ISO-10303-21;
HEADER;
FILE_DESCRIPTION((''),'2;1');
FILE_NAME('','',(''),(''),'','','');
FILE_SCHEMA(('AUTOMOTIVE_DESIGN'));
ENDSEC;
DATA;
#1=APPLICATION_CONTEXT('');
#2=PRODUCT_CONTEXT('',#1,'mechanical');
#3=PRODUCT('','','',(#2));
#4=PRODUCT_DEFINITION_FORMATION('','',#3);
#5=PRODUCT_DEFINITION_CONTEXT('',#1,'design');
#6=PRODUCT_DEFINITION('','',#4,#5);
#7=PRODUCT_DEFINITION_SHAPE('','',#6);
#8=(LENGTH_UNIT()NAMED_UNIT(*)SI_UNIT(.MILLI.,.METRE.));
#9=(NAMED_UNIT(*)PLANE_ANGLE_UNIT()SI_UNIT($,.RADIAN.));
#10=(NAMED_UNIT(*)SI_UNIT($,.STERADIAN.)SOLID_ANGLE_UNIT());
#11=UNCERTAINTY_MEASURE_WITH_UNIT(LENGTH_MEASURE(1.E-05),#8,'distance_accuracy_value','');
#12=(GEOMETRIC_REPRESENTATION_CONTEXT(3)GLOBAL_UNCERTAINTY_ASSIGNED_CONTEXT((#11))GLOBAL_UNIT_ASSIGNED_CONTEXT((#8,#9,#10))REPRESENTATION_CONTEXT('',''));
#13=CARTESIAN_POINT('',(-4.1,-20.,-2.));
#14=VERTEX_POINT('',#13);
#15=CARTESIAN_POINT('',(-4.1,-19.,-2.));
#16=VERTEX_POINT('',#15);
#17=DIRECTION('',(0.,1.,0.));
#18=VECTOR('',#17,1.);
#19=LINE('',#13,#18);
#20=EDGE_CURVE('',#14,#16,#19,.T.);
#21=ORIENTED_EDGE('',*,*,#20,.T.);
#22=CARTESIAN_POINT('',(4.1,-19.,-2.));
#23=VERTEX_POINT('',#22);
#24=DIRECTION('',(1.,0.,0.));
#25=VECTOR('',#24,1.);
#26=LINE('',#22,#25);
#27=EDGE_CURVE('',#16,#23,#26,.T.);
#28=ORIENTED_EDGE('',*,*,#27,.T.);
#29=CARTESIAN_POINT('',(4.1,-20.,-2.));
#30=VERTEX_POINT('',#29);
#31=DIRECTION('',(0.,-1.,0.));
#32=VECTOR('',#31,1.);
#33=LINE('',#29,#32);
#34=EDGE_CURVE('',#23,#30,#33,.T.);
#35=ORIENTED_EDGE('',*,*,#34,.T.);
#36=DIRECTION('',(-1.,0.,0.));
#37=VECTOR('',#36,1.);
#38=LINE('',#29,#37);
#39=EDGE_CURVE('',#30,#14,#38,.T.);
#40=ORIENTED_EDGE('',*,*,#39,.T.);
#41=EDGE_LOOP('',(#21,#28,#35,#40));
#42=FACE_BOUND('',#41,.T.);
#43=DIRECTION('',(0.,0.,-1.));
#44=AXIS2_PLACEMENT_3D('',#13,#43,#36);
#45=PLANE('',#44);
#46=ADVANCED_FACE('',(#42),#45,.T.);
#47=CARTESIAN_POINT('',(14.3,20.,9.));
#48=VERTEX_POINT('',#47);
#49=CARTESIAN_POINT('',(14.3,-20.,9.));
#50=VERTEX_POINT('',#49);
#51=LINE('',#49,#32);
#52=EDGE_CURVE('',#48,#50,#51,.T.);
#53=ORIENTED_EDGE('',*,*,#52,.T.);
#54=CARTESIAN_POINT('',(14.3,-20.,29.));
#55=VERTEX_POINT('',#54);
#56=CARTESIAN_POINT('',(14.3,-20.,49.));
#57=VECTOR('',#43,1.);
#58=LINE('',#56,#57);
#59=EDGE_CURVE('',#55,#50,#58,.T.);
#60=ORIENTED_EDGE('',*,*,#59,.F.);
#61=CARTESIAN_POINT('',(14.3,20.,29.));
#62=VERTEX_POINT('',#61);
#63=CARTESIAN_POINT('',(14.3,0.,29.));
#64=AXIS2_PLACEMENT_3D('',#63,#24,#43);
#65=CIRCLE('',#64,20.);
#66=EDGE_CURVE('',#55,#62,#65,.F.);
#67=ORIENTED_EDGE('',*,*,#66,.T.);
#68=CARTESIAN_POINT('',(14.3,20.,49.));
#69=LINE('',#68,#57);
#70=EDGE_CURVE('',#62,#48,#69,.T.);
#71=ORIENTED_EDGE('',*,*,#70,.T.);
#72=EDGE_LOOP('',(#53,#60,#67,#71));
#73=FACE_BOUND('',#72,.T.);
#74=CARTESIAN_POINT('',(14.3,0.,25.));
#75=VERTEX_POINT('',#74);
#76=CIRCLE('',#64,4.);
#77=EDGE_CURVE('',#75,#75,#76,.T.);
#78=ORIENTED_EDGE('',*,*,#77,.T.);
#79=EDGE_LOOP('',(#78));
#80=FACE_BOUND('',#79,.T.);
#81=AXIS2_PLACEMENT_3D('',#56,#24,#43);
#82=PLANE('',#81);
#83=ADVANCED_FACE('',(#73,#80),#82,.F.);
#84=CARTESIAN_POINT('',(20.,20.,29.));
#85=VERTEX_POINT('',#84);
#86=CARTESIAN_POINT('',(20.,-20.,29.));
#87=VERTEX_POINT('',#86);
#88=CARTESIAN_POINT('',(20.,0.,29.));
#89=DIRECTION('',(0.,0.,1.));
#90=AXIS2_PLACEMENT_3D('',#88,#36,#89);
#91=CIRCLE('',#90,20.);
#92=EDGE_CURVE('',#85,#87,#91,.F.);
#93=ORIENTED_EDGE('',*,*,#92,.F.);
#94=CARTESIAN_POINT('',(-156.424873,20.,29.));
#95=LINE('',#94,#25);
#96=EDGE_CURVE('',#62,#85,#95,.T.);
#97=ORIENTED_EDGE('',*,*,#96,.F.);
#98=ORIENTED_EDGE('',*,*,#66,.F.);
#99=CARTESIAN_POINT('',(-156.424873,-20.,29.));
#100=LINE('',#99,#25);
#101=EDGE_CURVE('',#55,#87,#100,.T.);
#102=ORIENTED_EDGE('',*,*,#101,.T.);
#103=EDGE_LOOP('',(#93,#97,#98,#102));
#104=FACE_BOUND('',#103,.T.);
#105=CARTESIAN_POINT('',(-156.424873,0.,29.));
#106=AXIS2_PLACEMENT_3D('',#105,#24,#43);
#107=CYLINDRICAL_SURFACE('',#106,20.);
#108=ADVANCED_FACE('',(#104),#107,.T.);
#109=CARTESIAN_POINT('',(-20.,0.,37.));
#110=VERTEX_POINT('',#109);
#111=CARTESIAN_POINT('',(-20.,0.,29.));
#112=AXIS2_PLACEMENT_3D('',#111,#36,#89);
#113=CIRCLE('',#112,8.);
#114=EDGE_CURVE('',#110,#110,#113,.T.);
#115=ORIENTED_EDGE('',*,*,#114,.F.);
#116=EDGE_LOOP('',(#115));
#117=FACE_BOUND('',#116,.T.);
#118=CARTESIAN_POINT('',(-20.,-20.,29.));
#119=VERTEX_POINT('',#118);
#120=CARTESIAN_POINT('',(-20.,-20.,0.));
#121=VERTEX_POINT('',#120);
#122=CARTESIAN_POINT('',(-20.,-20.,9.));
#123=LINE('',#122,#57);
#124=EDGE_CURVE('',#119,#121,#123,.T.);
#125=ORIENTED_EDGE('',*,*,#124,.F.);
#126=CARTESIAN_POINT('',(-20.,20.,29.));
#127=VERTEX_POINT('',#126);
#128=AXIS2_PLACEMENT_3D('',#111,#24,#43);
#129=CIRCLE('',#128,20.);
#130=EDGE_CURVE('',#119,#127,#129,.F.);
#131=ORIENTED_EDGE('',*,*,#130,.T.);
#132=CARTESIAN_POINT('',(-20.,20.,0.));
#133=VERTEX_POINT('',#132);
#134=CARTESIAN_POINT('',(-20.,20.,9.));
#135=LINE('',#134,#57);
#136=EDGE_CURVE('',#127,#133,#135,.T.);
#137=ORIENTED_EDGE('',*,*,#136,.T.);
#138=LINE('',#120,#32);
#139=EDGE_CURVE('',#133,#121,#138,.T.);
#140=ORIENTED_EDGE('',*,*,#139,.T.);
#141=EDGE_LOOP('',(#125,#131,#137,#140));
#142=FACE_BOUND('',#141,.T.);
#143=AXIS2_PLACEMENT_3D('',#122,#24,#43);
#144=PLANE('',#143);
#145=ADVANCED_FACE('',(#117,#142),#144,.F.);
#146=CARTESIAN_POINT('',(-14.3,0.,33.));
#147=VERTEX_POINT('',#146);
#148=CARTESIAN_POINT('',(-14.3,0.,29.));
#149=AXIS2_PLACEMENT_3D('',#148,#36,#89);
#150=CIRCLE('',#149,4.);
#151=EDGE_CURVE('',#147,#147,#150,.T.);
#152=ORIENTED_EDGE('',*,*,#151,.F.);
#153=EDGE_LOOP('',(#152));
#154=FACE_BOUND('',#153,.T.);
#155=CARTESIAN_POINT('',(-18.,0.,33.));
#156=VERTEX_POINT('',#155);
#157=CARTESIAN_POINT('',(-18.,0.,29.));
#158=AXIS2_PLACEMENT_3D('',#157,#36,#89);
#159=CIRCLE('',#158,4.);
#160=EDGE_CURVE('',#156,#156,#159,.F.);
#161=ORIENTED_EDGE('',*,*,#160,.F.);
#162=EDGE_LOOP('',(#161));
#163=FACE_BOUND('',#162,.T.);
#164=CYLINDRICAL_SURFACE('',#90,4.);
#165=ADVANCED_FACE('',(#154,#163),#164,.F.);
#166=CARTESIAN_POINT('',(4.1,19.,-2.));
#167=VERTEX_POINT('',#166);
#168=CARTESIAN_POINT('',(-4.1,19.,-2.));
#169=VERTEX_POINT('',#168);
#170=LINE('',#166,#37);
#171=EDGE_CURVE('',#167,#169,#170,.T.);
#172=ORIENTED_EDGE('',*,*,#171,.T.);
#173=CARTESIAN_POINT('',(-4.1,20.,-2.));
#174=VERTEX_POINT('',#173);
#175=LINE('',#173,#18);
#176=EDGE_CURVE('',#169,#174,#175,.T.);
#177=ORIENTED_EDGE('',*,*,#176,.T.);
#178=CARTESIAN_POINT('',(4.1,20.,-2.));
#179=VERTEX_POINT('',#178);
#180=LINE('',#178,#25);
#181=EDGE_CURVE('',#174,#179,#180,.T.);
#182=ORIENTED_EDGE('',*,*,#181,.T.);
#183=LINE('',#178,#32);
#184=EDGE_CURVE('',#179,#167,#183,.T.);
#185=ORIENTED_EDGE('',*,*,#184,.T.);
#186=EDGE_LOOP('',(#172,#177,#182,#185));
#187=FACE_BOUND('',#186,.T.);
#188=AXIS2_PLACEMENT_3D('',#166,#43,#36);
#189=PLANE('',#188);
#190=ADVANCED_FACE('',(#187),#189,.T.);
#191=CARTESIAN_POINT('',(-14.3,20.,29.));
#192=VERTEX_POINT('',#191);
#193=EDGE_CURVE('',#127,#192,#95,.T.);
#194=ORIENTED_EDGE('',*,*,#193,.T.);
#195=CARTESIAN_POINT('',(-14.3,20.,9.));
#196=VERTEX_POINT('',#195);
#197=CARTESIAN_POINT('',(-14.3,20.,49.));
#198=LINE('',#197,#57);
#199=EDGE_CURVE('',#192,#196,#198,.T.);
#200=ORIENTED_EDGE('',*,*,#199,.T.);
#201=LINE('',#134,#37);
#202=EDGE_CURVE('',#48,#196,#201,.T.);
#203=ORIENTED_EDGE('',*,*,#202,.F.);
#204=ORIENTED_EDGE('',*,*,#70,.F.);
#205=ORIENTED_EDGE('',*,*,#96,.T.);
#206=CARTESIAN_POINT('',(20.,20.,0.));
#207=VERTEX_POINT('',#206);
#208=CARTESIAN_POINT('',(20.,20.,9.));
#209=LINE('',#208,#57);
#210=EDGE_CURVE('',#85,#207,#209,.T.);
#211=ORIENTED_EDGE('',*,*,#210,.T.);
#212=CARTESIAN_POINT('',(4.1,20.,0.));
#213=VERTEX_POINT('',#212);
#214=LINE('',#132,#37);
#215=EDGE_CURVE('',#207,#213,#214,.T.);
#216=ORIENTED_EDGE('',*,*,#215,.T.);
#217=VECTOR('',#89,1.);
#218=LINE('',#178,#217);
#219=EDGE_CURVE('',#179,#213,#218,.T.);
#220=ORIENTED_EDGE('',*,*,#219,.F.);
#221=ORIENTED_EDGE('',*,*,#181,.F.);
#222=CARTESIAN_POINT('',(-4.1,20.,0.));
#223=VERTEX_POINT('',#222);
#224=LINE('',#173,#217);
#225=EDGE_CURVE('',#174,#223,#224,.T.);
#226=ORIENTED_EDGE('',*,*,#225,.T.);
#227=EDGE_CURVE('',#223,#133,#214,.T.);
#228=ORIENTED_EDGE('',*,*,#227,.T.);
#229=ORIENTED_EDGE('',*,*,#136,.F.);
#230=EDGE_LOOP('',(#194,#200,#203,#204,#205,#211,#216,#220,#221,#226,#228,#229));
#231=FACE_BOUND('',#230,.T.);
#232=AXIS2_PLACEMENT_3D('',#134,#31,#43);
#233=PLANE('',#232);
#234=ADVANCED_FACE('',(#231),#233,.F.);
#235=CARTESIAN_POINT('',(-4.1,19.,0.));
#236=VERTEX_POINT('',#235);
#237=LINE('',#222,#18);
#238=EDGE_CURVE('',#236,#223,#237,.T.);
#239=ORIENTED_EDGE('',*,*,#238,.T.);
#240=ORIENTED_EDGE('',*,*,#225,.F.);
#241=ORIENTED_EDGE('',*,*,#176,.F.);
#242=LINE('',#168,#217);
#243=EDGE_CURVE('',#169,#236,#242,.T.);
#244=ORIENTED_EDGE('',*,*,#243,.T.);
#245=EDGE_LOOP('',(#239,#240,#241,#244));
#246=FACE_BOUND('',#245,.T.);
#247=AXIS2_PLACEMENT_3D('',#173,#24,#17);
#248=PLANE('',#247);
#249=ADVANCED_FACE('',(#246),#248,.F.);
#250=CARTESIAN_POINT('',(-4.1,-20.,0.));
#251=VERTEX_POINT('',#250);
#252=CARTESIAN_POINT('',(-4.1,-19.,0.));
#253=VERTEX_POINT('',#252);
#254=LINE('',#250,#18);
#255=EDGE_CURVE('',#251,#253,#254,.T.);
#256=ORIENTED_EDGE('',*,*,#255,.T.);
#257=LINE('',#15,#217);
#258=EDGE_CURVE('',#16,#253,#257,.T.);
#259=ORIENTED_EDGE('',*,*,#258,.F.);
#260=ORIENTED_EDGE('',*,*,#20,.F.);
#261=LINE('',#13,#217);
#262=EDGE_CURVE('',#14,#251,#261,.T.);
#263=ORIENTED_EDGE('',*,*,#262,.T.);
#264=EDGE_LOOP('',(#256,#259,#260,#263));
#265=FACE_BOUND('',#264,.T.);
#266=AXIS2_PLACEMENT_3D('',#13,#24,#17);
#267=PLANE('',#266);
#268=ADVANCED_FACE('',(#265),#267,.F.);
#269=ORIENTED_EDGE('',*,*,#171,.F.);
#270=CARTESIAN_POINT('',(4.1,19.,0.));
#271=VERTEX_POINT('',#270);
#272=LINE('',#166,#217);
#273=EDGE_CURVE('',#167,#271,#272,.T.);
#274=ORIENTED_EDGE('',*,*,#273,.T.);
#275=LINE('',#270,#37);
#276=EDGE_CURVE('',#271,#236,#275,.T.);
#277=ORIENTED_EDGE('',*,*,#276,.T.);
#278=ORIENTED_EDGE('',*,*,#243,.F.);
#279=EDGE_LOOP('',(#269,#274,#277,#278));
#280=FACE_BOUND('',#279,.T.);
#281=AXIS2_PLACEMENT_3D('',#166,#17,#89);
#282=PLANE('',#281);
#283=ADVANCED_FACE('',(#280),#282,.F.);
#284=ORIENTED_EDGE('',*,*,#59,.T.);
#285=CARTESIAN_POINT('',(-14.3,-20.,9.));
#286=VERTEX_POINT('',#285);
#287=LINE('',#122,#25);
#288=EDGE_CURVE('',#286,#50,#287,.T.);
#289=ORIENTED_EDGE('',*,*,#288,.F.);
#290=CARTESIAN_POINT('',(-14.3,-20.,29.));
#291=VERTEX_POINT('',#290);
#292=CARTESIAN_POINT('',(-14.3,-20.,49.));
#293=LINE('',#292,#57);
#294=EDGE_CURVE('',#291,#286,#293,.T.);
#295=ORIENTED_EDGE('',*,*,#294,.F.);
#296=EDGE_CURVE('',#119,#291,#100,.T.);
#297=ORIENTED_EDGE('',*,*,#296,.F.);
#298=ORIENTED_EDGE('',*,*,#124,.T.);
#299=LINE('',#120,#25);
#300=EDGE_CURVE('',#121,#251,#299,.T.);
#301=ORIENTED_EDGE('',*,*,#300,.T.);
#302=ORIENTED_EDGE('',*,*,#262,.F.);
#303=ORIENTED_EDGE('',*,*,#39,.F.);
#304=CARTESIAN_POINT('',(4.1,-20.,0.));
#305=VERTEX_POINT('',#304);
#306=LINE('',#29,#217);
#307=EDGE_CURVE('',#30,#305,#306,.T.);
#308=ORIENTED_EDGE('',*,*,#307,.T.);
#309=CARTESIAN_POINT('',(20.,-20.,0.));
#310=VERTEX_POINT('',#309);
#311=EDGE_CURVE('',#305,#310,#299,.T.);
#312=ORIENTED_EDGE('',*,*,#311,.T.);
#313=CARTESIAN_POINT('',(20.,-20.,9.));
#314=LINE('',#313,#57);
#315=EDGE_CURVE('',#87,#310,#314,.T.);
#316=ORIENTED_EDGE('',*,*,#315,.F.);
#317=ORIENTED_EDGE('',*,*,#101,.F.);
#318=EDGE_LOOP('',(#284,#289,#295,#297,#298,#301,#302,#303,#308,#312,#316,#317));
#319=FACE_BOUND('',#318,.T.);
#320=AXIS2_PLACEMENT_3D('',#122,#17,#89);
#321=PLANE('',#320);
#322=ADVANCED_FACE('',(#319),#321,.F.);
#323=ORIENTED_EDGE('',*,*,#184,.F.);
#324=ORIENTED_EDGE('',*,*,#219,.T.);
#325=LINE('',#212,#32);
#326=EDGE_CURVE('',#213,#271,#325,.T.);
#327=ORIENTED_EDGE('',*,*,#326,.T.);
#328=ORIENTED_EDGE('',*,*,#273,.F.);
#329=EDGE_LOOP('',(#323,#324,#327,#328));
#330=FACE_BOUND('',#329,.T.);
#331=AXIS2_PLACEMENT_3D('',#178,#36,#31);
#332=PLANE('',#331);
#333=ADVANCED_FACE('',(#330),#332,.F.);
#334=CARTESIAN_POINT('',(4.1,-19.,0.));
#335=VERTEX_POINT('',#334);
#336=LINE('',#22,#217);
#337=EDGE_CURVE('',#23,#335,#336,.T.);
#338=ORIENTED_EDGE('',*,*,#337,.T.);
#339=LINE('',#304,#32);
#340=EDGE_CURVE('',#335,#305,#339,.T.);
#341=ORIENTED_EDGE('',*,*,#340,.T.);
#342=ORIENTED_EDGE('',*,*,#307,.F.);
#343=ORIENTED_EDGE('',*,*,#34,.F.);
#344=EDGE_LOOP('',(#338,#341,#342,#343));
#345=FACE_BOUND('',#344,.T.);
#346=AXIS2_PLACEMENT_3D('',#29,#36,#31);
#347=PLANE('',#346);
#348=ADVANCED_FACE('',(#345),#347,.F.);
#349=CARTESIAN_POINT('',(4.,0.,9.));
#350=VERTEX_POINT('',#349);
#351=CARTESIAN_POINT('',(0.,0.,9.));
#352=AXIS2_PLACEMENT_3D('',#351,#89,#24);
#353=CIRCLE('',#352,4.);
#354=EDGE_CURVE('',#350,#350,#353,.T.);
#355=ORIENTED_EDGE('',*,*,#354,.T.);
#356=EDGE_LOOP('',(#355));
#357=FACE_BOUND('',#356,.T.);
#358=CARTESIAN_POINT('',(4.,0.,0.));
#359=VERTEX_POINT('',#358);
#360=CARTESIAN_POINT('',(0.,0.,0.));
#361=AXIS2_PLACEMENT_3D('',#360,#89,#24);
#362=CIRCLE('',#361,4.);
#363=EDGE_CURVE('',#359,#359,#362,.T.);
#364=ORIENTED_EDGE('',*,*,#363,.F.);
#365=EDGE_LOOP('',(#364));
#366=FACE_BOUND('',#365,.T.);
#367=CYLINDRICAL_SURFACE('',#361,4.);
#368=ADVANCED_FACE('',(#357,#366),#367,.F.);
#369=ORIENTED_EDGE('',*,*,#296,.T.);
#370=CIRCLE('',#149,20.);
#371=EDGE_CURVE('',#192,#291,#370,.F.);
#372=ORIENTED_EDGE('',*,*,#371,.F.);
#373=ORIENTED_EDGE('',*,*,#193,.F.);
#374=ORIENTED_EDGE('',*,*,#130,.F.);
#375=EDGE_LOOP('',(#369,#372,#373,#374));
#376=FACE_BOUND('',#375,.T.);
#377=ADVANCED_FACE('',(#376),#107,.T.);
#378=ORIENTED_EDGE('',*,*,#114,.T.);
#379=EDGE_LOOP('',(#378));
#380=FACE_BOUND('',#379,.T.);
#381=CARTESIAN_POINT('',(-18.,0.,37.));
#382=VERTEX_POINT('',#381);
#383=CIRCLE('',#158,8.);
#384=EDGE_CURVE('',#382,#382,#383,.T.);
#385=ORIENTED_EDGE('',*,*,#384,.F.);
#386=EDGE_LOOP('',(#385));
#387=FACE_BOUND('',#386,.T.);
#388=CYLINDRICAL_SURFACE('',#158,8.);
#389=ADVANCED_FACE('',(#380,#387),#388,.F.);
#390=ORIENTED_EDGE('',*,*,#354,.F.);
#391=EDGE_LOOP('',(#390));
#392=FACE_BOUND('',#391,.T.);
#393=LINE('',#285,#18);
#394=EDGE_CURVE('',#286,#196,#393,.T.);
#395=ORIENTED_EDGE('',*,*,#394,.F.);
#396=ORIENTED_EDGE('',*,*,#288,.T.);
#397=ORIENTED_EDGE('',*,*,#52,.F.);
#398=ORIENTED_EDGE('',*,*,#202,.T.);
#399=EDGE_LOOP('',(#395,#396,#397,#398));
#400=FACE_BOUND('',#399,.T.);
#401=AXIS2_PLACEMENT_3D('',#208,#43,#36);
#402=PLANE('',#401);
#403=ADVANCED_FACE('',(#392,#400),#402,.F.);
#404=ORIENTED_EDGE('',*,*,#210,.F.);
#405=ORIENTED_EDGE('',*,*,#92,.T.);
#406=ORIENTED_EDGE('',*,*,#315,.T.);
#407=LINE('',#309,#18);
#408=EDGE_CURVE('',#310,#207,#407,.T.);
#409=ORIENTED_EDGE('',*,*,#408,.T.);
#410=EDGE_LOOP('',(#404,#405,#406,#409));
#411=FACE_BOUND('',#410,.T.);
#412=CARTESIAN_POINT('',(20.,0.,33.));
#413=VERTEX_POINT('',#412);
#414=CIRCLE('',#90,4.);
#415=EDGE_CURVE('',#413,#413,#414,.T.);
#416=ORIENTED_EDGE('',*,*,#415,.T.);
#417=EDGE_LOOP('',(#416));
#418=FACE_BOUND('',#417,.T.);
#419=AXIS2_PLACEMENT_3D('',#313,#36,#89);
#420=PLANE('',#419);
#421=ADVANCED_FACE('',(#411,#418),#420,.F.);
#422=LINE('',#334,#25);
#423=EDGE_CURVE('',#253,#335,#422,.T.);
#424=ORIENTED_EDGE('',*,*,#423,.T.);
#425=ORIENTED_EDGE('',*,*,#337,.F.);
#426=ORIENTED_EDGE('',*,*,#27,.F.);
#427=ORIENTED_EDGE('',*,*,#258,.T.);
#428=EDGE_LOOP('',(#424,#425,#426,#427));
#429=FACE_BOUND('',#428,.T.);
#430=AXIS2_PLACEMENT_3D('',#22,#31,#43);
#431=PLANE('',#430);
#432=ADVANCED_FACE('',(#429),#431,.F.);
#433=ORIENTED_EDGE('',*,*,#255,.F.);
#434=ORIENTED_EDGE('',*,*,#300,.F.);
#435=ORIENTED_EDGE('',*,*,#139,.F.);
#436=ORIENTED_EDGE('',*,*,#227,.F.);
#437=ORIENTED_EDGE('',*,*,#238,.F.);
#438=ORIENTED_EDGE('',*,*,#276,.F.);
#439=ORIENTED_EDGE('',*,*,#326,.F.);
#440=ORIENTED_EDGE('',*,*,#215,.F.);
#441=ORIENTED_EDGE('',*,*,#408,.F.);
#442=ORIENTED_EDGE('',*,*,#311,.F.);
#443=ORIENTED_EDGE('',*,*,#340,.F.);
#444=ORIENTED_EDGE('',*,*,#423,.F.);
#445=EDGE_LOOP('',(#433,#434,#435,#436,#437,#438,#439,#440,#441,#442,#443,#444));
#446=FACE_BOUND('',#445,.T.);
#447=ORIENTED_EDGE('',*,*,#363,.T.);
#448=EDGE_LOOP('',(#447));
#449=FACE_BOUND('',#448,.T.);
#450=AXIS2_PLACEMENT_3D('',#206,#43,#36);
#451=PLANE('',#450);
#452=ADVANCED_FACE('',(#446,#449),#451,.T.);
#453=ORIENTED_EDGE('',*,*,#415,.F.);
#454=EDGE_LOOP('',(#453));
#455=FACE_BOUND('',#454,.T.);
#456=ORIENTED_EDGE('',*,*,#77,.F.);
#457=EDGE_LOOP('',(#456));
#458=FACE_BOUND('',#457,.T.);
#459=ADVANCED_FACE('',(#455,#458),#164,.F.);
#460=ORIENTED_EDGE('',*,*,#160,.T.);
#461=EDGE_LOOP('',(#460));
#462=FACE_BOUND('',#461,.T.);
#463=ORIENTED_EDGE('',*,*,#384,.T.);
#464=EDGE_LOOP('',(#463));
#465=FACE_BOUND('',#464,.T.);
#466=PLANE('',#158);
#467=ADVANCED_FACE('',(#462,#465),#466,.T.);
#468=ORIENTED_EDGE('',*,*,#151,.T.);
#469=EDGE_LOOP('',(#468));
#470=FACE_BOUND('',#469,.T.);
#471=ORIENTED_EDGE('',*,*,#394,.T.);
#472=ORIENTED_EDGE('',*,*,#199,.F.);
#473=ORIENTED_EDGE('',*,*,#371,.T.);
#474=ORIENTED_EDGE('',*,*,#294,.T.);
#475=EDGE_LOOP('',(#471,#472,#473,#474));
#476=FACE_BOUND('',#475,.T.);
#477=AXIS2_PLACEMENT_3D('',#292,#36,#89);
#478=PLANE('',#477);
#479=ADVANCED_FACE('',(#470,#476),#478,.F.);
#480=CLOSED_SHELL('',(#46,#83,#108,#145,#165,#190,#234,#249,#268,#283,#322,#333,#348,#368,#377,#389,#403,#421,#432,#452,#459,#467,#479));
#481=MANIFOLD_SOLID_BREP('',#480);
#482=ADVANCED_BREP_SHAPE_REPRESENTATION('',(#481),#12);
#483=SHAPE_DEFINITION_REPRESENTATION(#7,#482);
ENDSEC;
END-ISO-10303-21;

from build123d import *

# Parameters (mm, degrees)
SKETCH_1_W          = 40
SKETCH_1_H          = 40
EXTRUDE_1_DEPTH     = 9
SKETCH_2_W          = 5.7
SKETCH_2_H          = 40
EXTRUDE_2_DEPTH     = 40
CUT_EXTRUDE_START   = -40
CUT_EXTRUDE_2_DEPTH = 40
SKETCH_4_R          = 4
CUT_EXTRUDE_3_DEPTH = 67.340033162
SKETCH_5_R          = 8
CUT_EXTRUDE_4_DEPTH = 2
SKETCH_6_R          = 4
CUT_EXTRUDE_5_DEPTH = 49.989794856
SKETCH_7_W          = 8.2
SKETCH_7_H          = 1
EXTRUDE_3_DEPTH     = 2


# Read off the part's stored shape, not the designer's step: 切除-拉伸2
with BuildPart() as part:
    # 草图1 → 凸台-拉伸1 (new body)
    with BuildSketch(Plane.XY):
        Rectangle(SKETCH_1_W, SKETCH_1_H)
    extrude(amount=EXTRUDE_1_DEPTH)

    # 草图2 → 凸台-拉伸2 (add)
    with BuildSketch(Plane.XY.offset(9)):
        with Locations((-17.15, 0)):
            Rectangle(SKETCH_2_W, SKETCH_2_H)
        with Locations((17.15, 0)):
            Rectangle(SKETCH_2_W, SKETCH_2_H)
    extrude(amount=EXTRUDE_2_DEPTH)

    # 切除-拉伸2 outline → 切除-拉伸2 (cut)
    with BuildSketch(Plane.ZY.offset(20).offset(CUT_EXTRUDE_START)):
        with BuildLine():
            Line((49, 20), (29, 20))
            ThreePointArc((29, 20), (43.142135559, 14.142135688), (49, 1.83e-07))
            Line((49, 1.83e-07), (49, 20))
        make_face()
        with BuildLine():
            Line((49, -20), (49, 1.83e-07))
            ThreePointArc((49, 1.83e-07), (43.142135688, -14.142135559), (29, -20))
            Line((29, -20), (49, -20))
        make_face()
    extrude(amount=CUT_EXTRUDE_2_DEPTH, mode=Mode.SUBTRACT)

    # 草图4 → 切除-拉伸3 (cut, through all)
    with BuildSketch(Plane.ZY.offset(20)):
        with Locations((29, 0)):
            Circle(SKETCH_4_R)
    extrude(amount=-CUT_EXTRUDE_3_DEPTH, mode=Mode.SUBTRACT)

    # 草图5 → 切除-拉伸4 (cut)
    with BuildSketch(Plane.ZY.offset(20)):
        with Locations((29, 0)):
            Circle(SKETCH_5_R)
    extrude(amount=-CUT_EXTRUDE_4_DEPTH, mode=Mode.SUBTRACT)

    # 草图6 → 切除-拉伸5 (cut, through all)
    with BuildSketch(Plane.XY.offset(9)):
        Circle(SKETCH_6_R)
    extrude(amount=-CUT_EXTRUDE_5_DEPTH, mode=Mode.SUBTRACT)

    # 草图7 → 凸台-拉伸3 (add)
    with BuildSketch(Plane(origin=(0, 0, 0), x_dir=(-1, 0, 0), z_dir=(0, 0, -1))):
        with Locations((0, 19.5)):
            Rectangle(SKETCH_7_W, SKETCH_7_H)
        with Locations((0, -19.5)):
            Rectangle(SKETCH_7_W, SKETCH_7_H)
    extrude(amount=EXTRUDE_3_DEPTH)


solid = part.part
